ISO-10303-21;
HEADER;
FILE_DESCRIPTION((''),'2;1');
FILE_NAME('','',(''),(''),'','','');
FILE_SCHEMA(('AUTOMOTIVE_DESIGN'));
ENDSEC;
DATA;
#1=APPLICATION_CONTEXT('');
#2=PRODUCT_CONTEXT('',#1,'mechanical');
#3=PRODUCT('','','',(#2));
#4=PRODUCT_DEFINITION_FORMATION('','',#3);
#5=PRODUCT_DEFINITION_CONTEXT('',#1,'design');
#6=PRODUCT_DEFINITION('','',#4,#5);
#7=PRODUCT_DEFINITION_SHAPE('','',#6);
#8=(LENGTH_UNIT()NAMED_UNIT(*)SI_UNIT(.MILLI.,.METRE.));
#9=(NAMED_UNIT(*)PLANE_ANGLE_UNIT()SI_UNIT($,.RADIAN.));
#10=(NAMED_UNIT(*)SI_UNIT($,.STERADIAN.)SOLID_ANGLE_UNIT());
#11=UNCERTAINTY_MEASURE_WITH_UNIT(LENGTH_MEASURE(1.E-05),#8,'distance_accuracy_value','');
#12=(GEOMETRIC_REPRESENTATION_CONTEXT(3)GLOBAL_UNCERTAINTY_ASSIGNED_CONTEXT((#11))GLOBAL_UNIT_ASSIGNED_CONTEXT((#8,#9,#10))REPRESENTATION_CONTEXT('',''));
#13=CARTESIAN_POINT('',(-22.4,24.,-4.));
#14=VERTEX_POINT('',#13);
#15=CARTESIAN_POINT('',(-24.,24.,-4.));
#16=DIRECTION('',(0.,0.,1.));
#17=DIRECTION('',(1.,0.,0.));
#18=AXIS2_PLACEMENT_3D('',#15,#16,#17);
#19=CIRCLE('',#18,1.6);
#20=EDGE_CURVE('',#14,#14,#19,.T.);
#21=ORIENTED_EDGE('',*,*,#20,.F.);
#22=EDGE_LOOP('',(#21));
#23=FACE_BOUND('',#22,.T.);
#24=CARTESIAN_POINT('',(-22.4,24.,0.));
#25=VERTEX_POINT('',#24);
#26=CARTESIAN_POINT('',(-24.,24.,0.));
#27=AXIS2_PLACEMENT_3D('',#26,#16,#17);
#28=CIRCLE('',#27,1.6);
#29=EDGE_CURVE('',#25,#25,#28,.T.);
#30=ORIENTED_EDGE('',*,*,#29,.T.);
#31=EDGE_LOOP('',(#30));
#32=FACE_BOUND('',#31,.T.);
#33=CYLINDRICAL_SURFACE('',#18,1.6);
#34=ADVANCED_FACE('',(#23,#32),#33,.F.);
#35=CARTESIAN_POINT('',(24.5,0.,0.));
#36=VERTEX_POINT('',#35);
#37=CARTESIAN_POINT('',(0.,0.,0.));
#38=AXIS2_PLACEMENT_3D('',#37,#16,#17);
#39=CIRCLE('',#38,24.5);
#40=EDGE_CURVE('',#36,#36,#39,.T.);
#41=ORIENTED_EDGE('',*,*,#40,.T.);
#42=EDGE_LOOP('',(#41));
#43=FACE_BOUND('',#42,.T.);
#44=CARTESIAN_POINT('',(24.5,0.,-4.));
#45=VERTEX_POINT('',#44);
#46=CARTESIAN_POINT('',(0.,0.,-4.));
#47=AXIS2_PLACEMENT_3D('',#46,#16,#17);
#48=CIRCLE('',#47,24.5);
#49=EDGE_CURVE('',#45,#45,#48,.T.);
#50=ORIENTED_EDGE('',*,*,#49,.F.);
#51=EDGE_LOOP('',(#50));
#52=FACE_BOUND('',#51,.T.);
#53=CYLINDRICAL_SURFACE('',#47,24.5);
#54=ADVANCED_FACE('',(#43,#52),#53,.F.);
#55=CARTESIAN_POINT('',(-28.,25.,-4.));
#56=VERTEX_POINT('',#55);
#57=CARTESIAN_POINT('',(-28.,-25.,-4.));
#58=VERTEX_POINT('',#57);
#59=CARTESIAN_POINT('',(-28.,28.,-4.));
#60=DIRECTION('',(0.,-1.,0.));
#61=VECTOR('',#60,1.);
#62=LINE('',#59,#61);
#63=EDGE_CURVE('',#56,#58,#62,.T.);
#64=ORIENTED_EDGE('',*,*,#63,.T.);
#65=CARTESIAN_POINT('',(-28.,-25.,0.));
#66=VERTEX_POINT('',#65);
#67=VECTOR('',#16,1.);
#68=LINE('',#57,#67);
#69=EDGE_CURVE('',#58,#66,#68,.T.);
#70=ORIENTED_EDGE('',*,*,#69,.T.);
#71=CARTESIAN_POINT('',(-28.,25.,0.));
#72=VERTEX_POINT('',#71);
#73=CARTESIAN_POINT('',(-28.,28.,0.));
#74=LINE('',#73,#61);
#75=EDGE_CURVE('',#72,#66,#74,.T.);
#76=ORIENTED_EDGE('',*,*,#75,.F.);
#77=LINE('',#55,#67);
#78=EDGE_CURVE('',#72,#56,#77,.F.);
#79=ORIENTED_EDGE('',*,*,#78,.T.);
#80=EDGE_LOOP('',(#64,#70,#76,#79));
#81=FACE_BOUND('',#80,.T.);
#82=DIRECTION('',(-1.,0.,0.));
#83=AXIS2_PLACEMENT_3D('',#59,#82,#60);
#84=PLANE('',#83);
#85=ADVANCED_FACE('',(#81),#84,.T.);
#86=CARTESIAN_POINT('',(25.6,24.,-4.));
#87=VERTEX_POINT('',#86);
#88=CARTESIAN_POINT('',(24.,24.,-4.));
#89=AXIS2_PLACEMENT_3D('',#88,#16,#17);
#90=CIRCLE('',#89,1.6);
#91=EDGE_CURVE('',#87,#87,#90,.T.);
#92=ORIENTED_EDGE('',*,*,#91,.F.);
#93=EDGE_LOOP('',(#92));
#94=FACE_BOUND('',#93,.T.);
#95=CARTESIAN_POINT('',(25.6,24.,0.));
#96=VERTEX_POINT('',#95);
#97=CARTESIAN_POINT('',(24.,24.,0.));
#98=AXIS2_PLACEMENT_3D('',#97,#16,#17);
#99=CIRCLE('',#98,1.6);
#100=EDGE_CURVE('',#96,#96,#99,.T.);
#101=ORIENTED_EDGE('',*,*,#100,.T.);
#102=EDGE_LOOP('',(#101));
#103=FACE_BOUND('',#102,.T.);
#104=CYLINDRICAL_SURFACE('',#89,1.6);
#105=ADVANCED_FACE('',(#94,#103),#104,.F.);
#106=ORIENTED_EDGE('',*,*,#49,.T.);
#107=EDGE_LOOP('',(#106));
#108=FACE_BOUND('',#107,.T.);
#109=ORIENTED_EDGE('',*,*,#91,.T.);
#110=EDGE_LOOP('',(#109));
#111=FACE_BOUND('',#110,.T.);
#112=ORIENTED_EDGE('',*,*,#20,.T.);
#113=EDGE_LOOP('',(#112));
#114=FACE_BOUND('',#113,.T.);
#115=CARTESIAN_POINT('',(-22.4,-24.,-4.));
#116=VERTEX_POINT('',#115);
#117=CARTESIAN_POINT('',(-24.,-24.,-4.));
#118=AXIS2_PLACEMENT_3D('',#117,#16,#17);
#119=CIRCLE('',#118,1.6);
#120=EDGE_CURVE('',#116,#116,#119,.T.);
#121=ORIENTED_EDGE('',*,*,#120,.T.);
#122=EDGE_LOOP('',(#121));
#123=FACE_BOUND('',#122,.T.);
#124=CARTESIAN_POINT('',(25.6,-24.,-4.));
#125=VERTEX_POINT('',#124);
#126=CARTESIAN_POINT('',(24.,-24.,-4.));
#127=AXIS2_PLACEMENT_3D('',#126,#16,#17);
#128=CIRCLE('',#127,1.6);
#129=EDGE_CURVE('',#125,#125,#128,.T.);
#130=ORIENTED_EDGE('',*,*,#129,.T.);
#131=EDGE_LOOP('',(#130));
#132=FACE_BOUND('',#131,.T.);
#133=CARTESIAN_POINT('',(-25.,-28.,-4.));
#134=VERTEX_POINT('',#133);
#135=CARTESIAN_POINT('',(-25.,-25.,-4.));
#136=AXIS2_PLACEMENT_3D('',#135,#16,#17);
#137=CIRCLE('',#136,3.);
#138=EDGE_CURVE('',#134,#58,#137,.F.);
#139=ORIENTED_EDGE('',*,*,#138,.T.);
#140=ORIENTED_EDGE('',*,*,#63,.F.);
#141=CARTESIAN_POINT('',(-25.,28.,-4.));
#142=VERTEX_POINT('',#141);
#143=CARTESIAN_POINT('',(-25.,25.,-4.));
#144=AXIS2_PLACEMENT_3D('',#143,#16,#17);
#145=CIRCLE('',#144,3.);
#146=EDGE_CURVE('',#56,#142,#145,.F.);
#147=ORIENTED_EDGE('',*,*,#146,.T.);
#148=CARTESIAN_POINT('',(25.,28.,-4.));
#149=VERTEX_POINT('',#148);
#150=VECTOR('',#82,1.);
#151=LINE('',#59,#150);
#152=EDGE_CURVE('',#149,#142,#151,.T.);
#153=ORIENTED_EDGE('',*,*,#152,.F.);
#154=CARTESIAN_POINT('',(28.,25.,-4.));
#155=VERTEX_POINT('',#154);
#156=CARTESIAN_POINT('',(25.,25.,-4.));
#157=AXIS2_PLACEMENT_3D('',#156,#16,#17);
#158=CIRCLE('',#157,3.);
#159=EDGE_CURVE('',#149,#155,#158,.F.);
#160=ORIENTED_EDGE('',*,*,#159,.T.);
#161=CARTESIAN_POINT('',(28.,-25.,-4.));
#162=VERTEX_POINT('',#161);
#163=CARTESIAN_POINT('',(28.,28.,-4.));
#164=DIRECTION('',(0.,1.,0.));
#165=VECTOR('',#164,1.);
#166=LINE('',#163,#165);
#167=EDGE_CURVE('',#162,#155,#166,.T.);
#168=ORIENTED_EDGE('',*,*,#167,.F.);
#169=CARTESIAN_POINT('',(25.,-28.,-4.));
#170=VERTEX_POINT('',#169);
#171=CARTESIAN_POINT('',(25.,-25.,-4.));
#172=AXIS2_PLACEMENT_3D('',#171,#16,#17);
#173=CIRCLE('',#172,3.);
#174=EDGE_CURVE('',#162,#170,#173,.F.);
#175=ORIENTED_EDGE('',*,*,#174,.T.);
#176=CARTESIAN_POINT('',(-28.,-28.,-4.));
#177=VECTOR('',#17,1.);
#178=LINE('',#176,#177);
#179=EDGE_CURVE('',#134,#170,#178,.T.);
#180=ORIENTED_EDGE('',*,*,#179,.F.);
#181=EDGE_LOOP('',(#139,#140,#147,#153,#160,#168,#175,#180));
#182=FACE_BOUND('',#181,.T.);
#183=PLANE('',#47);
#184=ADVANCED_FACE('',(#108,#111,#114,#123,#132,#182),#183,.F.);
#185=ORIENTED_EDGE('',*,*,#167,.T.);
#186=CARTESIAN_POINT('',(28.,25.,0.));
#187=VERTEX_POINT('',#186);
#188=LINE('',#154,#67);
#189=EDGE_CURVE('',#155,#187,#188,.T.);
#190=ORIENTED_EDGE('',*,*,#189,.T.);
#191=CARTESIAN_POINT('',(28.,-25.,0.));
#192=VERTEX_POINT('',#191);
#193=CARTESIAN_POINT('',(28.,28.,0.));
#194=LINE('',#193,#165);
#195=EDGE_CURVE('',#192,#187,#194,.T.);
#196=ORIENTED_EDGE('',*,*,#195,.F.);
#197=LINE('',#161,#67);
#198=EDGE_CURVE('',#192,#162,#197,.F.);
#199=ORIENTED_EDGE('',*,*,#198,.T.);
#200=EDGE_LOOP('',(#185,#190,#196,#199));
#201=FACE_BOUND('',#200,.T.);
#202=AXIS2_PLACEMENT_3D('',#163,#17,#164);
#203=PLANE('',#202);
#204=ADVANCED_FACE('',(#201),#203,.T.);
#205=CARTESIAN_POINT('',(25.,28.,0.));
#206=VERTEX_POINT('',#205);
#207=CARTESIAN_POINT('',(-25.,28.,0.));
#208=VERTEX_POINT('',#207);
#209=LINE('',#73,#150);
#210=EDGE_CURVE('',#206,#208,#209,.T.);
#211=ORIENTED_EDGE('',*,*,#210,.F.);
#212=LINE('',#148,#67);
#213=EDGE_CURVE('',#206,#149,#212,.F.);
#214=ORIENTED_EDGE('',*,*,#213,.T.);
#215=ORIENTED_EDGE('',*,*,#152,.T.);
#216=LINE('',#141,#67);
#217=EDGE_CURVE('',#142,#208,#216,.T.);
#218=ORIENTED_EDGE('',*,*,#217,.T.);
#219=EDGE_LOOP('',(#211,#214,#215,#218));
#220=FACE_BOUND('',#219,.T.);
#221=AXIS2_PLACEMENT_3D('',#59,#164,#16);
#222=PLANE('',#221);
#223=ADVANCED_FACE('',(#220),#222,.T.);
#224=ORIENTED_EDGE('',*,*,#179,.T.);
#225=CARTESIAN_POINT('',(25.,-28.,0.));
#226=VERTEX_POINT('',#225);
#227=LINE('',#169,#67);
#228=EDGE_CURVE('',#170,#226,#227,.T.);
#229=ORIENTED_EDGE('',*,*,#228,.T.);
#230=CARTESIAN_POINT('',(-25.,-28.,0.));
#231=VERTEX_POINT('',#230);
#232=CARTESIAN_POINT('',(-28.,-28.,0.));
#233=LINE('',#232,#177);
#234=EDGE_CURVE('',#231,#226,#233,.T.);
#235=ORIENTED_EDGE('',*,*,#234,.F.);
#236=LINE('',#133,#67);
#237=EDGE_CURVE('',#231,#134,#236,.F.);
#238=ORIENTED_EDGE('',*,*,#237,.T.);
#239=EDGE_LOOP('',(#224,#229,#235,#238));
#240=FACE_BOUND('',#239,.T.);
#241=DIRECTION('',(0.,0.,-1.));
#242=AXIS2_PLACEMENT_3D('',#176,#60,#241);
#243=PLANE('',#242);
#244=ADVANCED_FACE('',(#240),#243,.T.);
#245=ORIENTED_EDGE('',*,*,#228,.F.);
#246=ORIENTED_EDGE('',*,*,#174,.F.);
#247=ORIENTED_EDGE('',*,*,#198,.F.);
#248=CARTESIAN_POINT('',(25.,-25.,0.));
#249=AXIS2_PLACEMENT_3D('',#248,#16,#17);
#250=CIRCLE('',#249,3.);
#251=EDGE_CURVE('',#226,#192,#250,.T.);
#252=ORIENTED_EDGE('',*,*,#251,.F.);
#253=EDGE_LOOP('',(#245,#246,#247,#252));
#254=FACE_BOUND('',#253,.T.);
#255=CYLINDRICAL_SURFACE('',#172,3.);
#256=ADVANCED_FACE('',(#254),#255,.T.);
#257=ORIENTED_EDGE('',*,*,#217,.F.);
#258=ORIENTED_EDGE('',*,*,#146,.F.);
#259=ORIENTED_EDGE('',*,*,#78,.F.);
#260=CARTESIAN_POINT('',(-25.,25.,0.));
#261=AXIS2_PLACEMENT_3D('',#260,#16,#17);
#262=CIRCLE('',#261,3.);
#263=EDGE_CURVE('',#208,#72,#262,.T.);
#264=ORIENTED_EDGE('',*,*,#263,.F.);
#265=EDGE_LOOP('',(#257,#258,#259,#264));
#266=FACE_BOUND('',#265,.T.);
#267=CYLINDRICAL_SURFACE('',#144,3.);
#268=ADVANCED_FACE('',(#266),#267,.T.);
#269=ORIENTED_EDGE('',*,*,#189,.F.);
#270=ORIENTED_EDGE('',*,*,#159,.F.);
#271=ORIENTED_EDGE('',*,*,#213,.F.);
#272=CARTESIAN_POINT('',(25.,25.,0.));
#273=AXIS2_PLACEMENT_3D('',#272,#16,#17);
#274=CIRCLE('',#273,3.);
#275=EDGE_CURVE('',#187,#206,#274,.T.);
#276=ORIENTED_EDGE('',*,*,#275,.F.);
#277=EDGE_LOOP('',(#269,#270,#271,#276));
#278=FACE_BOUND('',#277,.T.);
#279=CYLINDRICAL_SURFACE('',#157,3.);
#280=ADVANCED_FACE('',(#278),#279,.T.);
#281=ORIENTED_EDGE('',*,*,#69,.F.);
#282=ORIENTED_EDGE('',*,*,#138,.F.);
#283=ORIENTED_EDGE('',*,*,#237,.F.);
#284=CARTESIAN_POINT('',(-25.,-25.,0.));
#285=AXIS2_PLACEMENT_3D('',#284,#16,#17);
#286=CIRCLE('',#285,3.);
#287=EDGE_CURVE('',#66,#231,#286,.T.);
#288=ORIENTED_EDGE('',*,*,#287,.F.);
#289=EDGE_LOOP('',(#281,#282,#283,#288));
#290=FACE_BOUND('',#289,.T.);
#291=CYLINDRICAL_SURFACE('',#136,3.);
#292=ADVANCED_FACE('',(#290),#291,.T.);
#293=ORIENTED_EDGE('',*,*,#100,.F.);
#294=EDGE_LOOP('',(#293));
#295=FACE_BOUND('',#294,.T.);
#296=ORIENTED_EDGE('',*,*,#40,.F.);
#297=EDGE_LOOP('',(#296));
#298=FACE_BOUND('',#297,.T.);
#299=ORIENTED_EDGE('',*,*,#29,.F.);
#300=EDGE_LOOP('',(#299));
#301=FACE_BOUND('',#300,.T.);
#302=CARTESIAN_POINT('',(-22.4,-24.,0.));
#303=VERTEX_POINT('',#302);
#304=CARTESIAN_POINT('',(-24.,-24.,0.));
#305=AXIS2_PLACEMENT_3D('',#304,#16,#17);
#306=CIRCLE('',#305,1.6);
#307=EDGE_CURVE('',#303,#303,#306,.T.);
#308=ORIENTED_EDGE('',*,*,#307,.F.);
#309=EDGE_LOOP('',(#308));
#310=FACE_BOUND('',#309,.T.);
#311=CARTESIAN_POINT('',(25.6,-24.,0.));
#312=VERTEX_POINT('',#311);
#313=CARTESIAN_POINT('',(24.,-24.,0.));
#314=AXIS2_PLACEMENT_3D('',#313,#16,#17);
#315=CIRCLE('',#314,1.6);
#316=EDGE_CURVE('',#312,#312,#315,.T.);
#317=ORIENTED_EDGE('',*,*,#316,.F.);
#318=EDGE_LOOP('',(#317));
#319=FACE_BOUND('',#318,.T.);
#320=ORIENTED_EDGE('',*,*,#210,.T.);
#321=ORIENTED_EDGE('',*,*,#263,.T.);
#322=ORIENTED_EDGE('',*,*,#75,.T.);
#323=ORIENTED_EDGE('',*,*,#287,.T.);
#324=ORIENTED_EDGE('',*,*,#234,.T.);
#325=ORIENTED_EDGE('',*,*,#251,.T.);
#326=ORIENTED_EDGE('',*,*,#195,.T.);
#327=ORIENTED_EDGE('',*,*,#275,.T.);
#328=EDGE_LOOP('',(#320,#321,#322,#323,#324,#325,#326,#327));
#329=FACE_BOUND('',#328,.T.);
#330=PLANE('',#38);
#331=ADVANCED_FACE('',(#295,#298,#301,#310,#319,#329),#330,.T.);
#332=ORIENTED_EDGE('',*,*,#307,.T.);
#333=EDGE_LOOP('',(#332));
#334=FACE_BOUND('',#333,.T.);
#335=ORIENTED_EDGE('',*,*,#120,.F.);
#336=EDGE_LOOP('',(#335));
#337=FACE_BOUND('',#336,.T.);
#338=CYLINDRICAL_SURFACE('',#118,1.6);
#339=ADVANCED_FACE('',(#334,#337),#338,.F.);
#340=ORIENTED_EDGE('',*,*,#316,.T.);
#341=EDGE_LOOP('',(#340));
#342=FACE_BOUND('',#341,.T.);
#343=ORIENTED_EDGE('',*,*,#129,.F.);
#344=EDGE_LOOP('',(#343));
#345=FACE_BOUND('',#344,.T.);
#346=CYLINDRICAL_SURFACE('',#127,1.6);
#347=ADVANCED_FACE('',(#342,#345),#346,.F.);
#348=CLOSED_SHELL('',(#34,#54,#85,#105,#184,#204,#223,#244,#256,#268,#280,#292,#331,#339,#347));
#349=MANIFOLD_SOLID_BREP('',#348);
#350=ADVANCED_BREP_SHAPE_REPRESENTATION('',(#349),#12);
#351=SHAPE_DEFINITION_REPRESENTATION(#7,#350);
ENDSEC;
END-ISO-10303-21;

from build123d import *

# Parameters (mm, degrees)
SKETCH_1_W             = 56
SKETCH_1_H             = 56
SM_BASE_FLANGE_1_DEPTH = 4
SKETCH_6_R             = 24.5
SKETCH_6_R_2           = 1.6
CUT_EXTRUDE_1_DEPTH    = 4
FILLET_1_R             = 3


# Sheet-metal steps are written as plain solids
with BuildPart() as part:
    # Sketch 1 → Базовая кромка1 (new body)
    with BuildSketch(Plane.XY):
        Rectangle(SKETCH_1_W, SKETCH_1_H)
    extrude(amount=-SM_BASE_FLANGE_1_DEPTH)

    # Эскиз6 → Вырез-Вытянуть1 (cut)
    with BuildSketch(Plane.XY):
        Circle(SKETCH_6_R)
        with Locations((-24, 24)):
            Circle(SKETCH_6_R_2)
        with Locations((24, 24)):
            Circle(SKETCH_6_R_2)
        with Locations((24, -24)):
            Circle(SKETCH_6_R_2)
        with Locations((-24, -24)):
            Circle(SKETCH_6_R_2)
    extrude(amount=-CUT_EXTRUDE_1_DEPTH, mode=Mode.SUBTRACT)

    # Скругление1
    fillet_1_edges = [part.edges().sort_by_distance(p)[0] for p in [
        (28, -28, -2),
        (-28, -28, -2),
        (-28, 28, -2),
        (28, 28, -2),
    ]]
    fillet(fillet_1_edges, radius=FILLET_1_R)


solid = part.part
